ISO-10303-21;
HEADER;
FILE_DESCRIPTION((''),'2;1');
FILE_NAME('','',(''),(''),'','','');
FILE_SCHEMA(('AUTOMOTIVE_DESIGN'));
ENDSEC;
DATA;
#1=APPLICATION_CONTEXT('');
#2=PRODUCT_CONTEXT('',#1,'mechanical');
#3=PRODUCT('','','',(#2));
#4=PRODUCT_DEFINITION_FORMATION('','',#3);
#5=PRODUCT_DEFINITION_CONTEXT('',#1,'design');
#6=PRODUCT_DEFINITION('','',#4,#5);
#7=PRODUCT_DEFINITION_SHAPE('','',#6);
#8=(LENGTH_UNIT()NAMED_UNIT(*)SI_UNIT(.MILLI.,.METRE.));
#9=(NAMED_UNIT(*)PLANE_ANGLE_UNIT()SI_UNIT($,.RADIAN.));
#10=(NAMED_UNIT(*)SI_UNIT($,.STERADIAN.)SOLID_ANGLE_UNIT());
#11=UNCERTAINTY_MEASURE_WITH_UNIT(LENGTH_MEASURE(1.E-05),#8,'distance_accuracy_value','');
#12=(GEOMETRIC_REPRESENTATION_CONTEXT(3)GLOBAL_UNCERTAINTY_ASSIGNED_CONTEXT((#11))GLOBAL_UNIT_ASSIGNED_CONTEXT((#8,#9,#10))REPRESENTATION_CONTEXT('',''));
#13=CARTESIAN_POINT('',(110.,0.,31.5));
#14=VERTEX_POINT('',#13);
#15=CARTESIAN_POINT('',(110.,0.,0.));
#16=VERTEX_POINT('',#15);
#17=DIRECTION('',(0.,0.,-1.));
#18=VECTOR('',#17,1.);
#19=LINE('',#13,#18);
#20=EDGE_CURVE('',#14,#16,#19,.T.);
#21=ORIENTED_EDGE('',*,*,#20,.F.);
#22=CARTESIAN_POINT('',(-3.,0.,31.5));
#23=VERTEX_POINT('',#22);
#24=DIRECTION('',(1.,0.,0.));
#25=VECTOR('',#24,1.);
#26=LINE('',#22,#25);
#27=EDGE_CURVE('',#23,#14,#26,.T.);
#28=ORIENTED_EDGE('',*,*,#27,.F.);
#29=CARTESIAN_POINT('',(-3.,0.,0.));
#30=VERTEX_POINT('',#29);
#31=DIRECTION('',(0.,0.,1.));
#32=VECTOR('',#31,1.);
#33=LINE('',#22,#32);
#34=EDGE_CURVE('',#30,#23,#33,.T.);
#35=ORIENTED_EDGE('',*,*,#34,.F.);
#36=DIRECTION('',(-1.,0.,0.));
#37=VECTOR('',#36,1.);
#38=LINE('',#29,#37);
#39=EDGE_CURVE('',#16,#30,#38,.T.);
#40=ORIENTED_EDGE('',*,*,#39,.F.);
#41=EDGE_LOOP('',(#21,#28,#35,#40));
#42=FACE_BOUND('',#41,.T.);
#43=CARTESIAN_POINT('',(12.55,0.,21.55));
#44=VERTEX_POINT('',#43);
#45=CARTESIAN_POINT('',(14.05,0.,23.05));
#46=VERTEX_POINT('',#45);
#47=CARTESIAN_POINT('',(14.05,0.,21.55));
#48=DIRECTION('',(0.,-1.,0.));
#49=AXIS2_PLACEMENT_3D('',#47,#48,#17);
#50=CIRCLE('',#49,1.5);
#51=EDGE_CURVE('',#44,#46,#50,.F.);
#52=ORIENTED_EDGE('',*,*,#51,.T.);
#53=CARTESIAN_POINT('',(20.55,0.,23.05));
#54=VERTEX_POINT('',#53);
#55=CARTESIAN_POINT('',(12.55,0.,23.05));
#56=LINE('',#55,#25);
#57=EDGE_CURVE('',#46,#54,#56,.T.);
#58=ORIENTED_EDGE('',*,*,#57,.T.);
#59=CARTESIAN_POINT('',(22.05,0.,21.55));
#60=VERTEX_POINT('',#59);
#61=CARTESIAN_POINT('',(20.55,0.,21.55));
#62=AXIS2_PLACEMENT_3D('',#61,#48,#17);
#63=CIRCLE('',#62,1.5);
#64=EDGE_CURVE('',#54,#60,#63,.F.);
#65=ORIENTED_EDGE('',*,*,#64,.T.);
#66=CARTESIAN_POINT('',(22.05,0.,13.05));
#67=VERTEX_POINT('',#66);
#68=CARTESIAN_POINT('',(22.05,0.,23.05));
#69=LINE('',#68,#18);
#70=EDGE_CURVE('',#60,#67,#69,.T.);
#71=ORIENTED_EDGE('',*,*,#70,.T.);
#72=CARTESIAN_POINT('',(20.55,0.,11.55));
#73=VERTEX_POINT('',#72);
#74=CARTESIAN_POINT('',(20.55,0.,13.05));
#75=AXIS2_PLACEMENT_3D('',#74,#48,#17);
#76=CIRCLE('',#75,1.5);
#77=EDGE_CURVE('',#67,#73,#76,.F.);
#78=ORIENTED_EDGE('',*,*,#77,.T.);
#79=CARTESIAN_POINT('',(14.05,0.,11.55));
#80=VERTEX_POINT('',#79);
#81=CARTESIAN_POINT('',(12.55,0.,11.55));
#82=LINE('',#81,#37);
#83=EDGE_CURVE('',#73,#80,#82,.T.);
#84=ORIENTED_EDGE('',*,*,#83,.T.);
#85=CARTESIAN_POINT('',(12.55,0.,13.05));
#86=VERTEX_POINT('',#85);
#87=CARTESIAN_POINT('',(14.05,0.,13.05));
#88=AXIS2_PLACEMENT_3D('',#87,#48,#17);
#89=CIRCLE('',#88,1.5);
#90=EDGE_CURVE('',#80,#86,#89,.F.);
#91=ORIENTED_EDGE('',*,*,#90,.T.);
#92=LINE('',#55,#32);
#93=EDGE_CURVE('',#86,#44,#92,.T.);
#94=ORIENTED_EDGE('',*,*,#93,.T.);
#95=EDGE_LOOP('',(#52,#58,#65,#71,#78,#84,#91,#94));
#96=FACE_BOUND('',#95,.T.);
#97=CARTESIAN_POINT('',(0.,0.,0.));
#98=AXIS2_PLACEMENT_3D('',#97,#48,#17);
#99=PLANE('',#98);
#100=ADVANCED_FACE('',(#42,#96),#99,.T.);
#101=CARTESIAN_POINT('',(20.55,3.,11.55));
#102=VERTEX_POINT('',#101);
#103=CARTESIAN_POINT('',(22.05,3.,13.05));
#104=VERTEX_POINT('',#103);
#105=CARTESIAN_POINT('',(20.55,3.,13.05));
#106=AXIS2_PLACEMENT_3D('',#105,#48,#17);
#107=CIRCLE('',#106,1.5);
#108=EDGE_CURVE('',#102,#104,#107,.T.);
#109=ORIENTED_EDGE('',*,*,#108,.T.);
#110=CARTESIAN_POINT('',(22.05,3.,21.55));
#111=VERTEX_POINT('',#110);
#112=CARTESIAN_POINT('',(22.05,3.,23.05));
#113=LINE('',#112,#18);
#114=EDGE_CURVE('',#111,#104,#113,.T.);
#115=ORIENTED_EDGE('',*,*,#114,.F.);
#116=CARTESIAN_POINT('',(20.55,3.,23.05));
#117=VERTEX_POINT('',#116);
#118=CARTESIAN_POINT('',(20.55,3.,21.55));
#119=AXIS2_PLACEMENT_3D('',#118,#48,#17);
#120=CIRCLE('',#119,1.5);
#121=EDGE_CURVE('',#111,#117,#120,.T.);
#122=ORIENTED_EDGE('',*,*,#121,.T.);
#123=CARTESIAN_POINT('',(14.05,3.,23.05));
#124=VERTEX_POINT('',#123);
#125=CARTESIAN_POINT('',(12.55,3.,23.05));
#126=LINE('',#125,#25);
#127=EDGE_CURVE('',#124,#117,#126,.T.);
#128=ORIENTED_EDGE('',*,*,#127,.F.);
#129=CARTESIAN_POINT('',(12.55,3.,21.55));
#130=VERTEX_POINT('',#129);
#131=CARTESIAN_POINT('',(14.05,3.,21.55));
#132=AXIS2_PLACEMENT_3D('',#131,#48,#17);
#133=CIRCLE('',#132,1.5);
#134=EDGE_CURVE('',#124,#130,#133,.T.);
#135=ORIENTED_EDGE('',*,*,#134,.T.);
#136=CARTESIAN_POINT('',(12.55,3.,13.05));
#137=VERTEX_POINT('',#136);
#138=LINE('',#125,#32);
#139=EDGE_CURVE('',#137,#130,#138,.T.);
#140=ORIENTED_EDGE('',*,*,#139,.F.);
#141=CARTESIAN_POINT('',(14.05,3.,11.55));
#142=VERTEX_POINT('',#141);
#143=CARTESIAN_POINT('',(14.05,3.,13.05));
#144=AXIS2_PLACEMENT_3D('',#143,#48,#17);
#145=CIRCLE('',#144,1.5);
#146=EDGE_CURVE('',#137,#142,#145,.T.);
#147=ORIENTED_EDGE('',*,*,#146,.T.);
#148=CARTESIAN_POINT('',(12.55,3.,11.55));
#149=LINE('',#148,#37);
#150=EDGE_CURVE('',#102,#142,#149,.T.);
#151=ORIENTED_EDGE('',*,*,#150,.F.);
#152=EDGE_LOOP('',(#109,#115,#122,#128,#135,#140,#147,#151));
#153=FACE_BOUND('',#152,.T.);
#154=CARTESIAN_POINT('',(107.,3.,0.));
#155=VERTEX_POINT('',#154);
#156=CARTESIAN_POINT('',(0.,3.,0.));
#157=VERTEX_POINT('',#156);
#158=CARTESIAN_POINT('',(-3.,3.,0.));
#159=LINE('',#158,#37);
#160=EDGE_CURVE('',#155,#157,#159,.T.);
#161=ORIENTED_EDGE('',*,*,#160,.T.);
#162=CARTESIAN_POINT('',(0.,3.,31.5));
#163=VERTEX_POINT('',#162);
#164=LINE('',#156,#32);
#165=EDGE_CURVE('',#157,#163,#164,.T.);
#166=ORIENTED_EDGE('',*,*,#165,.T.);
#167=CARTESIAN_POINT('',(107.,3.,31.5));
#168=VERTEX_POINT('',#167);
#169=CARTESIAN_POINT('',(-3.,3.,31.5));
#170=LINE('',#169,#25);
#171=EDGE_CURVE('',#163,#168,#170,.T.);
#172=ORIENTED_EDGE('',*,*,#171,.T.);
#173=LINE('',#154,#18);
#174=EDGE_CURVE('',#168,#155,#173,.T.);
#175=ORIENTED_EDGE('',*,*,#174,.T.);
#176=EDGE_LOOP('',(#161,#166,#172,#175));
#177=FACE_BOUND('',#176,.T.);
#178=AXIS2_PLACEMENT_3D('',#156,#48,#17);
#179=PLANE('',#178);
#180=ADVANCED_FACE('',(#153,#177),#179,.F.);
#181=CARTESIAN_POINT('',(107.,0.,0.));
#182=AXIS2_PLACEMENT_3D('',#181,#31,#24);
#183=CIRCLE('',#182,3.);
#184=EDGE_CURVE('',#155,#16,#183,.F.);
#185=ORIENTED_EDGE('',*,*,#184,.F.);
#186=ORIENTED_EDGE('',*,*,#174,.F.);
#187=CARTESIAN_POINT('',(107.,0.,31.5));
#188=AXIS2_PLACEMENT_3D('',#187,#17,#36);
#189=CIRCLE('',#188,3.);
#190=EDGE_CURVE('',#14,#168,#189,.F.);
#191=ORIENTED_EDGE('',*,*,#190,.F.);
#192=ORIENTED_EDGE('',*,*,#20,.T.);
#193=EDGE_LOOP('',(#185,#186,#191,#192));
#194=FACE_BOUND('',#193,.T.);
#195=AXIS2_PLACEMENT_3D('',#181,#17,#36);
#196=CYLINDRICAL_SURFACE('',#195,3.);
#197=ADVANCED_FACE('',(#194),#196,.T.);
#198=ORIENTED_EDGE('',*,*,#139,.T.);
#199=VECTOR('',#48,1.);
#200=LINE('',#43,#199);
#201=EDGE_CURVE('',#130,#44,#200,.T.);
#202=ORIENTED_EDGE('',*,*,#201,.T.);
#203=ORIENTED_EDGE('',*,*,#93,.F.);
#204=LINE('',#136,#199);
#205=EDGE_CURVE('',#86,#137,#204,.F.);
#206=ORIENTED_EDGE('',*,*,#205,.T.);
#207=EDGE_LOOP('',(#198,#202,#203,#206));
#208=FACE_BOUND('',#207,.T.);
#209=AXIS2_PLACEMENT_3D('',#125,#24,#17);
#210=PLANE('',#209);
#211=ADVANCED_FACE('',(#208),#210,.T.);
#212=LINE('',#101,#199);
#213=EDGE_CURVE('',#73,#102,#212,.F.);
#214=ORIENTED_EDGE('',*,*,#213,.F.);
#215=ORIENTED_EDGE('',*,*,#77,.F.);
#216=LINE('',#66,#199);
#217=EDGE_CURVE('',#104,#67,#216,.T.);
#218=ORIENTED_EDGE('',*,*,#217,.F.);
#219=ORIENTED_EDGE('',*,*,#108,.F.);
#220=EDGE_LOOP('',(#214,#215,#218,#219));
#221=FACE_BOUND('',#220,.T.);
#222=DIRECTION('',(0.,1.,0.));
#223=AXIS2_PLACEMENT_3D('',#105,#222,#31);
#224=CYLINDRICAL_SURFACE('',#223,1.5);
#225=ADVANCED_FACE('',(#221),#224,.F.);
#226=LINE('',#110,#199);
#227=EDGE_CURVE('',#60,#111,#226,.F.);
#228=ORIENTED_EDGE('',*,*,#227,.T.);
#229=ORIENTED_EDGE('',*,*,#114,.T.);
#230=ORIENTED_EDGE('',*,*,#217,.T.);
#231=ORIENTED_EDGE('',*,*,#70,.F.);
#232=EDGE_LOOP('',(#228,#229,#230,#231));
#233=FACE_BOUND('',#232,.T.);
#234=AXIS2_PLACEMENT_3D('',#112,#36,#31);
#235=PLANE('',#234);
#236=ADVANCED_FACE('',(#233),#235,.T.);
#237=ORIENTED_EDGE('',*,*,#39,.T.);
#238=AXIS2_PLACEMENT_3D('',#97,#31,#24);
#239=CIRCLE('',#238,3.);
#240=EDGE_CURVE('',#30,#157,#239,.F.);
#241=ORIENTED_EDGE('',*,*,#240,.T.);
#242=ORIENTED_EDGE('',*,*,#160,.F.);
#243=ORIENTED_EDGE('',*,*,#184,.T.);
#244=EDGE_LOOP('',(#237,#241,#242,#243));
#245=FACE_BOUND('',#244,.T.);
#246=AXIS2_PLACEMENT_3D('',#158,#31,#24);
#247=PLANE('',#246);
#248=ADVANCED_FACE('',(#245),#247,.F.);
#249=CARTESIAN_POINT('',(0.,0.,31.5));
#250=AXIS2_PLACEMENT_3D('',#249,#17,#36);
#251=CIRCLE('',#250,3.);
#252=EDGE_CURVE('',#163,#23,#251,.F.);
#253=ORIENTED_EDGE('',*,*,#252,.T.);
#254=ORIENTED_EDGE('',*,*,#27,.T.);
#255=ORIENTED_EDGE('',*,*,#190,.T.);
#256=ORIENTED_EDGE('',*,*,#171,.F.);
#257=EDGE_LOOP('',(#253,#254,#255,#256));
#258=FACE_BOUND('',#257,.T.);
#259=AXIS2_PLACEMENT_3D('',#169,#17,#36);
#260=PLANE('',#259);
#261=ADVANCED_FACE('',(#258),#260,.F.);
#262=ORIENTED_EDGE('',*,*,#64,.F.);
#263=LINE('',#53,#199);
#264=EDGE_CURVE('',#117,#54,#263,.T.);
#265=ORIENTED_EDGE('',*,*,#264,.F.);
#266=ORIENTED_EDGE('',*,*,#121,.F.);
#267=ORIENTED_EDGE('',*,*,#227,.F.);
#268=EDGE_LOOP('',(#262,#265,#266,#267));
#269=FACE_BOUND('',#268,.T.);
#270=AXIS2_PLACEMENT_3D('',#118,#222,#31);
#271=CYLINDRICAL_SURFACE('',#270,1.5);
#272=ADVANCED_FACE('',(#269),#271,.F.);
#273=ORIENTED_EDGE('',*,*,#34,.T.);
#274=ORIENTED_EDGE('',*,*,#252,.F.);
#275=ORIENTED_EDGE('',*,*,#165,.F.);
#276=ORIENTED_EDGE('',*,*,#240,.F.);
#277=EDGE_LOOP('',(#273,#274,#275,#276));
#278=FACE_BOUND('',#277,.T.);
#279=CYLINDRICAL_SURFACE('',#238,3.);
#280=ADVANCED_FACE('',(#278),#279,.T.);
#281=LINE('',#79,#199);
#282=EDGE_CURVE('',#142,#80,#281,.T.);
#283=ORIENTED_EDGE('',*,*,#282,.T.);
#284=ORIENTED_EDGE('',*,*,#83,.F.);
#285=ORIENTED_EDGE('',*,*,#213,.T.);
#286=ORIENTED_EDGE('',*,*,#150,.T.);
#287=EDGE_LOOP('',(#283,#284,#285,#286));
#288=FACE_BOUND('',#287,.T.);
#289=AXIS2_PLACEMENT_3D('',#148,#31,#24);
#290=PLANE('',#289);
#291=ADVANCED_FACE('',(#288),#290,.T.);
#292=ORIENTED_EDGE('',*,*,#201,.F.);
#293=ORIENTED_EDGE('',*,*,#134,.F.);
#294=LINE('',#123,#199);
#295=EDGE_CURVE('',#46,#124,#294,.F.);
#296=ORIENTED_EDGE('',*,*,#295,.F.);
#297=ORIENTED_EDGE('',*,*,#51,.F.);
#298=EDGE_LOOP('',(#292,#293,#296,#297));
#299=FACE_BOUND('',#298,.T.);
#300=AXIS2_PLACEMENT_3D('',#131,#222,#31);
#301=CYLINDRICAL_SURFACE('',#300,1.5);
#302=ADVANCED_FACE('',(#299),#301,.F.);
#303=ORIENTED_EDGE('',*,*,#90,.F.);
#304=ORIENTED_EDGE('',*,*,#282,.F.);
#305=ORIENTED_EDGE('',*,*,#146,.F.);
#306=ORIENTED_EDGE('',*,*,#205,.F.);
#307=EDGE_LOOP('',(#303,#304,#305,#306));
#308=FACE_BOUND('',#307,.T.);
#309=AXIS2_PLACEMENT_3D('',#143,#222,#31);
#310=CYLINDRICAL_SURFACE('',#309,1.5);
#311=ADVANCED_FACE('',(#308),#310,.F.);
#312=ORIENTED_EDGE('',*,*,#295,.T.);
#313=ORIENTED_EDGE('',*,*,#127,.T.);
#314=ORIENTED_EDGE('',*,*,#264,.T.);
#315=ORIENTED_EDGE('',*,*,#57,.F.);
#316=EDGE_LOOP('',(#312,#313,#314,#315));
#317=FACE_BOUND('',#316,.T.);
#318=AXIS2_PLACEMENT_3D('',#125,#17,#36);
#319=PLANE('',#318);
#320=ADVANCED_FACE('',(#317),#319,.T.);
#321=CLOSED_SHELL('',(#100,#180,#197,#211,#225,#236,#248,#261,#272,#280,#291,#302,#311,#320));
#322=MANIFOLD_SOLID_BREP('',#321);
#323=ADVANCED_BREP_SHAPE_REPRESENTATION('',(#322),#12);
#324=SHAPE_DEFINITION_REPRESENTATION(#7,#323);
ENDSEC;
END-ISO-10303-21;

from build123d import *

# Parameters (mm, degrees)
SKETCH_1_W                      = 113
SKETCH_1_H                      = 31.5
SKETCH_1_W_2                    = 9.5
SKETCH_1_H_2                    = 11.5
EXTRUDE_1_DEPTH                 = 3
TOOL_D3_R1P5_POWER_CORNERS_R    = 1.5
TOOL_D3_R3_REAR_OUTER_CORNERS_R = 3


with BuildPart() as part:
    # Эскиз1 → Бобышка-Вытянуть1 (new body)
    with BuildSketch(Plane(origin=(0, 0, 0), x_dir=(1, 0, 0), z_dir=(0, 1, 0))):
        with Locations((53.5, -15.75)):
            Rectangle(SKETCH_1_W, SKETCH_1_H)
        with Locations((17.3, -17.3)):
            Rectangle(SKETCH_1_W_2, SKETCH_1_H_2, mode=Mode.SUBTRACT)
    extrude(amount=EXTRUDE_1_DEPTH)

    # tool_D3_R1p5_power_corners
    tool_d3_r1p5_power_corners_edges = [part.edges().sort_by_distance(p)[0] for p in [
        (12.55, 1.5, 11.55),
        (12.55, 1.5, 23.05),
        (22.05, 1.5, 23.05),
        (22.05, 1.5, 11.55),
    ]]
    fillet(tool_d3_r1p5_power_corners_edges, radius=TOOL_D3_R1P5_POWER_CORNERS_R)

    # tool_D3_R3_rear_outer_corners
    tool_d3_r3_rear_outer_corners_edges = [part.edges().sort_by_distance(p)[0] for p in [
        (-3, 3, 15.75),
        (110, 3, 15.75),
    ]]
    fillet(tool_d3_r3_rear_outer_corners_edges, radius=TOOL_D3_R3_REAR_OUTER_CORNERS_R - 0.0001)  # a hair under: the kernel refuses the full size


solid = part.part
